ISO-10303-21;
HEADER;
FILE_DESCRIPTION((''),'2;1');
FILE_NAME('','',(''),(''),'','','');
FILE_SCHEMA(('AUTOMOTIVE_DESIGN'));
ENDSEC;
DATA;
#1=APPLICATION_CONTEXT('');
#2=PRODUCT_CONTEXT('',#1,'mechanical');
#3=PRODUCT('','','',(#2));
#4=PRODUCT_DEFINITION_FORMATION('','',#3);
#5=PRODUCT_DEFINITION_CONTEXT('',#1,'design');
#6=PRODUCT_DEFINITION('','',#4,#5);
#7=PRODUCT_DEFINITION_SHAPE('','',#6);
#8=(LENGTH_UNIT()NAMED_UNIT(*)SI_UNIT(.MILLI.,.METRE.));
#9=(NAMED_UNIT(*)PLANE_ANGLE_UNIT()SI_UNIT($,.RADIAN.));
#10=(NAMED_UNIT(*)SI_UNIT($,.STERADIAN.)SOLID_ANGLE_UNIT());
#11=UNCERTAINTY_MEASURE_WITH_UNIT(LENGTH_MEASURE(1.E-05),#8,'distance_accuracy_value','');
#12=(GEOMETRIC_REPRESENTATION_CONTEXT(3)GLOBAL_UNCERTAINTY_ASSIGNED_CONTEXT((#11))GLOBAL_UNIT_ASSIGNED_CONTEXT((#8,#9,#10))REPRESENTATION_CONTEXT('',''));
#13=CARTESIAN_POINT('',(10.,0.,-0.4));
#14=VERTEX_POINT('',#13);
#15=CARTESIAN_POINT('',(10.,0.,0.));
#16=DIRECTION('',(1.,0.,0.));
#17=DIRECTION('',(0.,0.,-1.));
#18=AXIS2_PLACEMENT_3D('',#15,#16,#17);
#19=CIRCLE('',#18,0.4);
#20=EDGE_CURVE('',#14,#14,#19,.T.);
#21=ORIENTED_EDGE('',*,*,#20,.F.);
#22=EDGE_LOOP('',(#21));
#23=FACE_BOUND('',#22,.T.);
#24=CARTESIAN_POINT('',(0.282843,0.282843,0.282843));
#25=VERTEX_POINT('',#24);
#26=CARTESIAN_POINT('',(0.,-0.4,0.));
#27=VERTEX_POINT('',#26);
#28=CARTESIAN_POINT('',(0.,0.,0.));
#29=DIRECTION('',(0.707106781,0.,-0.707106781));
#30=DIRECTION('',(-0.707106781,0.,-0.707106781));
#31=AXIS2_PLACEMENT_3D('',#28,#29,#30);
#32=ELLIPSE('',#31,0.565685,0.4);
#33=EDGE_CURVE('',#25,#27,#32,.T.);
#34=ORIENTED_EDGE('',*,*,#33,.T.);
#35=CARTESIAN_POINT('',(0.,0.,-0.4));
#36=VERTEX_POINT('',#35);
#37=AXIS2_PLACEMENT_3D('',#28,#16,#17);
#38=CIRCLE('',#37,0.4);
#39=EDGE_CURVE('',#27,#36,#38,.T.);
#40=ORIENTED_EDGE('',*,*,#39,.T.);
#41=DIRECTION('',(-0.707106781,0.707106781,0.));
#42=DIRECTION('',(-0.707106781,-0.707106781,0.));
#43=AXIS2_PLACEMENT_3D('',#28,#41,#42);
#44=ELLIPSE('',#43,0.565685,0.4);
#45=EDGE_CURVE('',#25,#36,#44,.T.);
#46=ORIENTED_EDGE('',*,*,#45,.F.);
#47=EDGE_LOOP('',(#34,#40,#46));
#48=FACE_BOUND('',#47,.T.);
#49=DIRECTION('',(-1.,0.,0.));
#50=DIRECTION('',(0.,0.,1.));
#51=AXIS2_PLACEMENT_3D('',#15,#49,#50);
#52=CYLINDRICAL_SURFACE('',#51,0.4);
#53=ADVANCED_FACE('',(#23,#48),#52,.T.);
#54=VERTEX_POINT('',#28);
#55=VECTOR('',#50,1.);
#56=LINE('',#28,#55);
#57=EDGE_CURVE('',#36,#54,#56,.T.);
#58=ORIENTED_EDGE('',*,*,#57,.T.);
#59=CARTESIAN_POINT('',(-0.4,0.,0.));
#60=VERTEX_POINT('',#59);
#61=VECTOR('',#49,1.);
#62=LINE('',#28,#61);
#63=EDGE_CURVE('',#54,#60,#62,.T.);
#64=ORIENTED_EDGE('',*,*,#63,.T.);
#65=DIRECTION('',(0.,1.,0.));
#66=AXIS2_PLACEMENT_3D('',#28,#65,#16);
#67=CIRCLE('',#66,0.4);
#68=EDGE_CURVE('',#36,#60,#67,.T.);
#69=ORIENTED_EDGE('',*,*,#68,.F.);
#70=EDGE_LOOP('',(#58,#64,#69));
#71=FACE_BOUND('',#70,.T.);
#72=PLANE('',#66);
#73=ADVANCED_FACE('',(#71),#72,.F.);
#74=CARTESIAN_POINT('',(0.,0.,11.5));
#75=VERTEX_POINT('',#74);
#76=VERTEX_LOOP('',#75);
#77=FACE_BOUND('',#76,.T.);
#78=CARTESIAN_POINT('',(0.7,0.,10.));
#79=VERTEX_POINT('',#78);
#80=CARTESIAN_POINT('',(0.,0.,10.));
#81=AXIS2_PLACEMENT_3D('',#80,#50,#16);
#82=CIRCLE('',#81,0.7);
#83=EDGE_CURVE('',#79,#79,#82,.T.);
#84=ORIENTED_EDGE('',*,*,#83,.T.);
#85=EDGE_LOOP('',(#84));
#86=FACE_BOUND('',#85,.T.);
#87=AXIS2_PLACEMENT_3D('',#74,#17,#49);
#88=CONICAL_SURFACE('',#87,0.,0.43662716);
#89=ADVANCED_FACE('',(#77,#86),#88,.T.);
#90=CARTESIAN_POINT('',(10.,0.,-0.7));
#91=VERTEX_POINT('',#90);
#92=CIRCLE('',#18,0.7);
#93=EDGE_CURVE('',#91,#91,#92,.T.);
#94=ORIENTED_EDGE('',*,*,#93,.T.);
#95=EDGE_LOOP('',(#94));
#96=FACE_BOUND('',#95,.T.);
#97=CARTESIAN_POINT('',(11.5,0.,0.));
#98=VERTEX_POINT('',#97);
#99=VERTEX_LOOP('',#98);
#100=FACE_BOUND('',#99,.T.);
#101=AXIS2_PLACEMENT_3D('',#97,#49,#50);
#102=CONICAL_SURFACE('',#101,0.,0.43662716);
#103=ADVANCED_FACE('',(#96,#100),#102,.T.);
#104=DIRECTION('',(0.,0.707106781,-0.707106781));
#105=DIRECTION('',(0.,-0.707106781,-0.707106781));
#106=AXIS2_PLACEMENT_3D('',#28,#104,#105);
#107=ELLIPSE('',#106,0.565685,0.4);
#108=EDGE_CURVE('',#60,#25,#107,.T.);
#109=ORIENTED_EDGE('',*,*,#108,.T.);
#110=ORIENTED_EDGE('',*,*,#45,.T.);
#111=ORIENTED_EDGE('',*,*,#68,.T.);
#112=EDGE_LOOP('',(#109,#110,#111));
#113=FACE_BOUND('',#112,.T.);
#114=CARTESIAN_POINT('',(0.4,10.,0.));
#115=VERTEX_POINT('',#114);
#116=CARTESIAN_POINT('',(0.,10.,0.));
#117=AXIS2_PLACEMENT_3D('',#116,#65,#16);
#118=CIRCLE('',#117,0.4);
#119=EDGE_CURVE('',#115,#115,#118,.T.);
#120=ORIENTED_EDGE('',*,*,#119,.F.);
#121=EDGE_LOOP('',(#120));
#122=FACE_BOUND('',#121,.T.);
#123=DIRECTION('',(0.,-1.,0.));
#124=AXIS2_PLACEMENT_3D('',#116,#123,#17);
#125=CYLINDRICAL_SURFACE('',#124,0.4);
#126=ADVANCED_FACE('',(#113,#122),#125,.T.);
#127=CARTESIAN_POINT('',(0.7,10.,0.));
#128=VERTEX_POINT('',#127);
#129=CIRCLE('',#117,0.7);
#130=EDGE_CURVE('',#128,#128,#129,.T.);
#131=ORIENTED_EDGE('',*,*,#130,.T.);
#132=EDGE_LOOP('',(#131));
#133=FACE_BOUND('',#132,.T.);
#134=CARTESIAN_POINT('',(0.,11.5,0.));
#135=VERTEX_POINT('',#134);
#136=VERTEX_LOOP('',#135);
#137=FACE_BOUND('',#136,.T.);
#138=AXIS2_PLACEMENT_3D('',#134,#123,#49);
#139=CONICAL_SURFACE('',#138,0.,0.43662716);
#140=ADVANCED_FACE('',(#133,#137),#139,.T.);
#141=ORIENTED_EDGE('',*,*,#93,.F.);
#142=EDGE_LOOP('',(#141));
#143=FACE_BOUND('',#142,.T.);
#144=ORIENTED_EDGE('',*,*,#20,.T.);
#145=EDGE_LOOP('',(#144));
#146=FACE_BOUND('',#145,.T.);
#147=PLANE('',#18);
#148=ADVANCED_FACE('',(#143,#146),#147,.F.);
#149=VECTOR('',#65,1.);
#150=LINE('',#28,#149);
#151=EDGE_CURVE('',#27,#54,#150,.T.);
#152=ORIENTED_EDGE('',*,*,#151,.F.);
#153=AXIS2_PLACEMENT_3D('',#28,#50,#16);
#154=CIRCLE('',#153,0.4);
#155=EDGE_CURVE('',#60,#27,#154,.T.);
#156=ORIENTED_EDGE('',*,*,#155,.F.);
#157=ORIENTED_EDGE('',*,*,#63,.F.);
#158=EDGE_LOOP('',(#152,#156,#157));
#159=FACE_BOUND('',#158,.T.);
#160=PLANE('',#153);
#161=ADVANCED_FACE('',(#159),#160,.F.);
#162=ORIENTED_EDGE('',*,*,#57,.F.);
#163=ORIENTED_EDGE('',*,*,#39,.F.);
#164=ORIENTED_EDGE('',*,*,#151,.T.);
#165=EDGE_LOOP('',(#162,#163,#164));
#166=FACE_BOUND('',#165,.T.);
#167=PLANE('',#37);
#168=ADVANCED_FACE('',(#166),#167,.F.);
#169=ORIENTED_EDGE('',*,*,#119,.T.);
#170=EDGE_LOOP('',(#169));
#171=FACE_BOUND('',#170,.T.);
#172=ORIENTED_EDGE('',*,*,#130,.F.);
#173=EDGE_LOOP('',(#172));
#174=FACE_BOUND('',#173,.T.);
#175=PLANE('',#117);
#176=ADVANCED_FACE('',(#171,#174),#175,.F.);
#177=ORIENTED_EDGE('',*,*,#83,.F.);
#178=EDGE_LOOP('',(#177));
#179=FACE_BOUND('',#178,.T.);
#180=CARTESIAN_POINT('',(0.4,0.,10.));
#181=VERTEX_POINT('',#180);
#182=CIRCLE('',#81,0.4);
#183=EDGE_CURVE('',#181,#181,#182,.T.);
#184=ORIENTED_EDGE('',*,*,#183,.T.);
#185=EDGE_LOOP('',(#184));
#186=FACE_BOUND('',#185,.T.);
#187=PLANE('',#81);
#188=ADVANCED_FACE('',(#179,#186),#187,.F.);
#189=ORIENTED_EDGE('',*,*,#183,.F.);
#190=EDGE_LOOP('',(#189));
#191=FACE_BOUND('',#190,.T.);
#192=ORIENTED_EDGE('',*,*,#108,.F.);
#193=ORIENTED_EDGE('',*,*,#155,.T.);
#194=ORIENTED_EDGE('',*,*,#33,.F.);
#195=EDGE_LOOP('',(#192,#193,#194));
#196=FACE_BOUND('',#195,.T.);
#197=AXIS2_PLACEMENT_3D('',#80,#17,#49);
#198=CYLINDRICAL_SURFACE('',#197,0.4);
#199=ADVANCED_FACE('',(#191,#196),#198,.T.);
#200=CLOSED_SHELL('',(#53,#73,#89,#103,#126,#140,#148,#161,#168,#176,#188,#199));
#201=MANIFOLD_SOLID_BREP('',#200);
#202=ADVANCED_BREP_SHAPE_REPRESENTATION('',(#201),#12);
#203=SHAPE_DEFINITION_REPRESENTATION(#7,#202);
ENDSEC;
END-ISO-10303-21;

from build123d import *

# Parameters (mm, degrees)
SKETCH4_R         = 0.4
SKETCH5_R         = 0.7
CIRPATTERN2_COUNT = 2
CIRPATTERN2_ANGLE = 90


# Read off the part's stored shape, not the designer's step: CirPattern1
with BuildPart() as part:
    # Sweep1: sweep along a path in Sketch2
    with BuildLine(Plane(origin=(0, 0, 0), x_dir=(1, 0, 0), z_dir=(0, 1, 0))) as sweep1_path:
        Line((0, 0), (0, -10))
    # Sketch4 → Sweep1 (sweep)
    with BuildSketch(Plane.XY):
        Circle(SKETCH4_R)
    sweep1 = sweep(path=sweep1_path.line)

    # Sketch5 → Loft1 section 0
    with BuildSketch(Plane.XY.offset(10), mode=Mode.PRIVATE) as loft1_s0:
        Circle(SKETCH5_R)
    loft1 = loft([loft1_s0.sketch, Vertex(0, 0, 11.5)])

    # CirPattern1 outline → CirPattern1 (revolve)
    with BuildSketch(Plane.YX):
        Polygon((0.7, 10), (0, 11.5), (0, 0), (0.4, 0), (0.4, 10), align=None)
    revolve(axis=Axis((0, 0, 0), (1, 0, 0)))

    # CirPattern2: Sweep1, Loft1 ×2 about axis
    cirpattern2_axis = Axis((0, 0, 0), (-1, 0, 0))
    add([sweep1.rotate(cirpattern2_axis, i * CIRPATTERN2_ANGLE / (CIRPATTERN2_COUNT - 1)) for i in range(1, CIRPATTERN2_COUNT)])
    add([loft1.rotate(cirpattern2_axis, i * CIRPATTERN2_ANGLE / (CIRPATTERN2_COUNT - 1)) for i in range(1, CIRPATTERN2_COUNT)])


solid = part.part
